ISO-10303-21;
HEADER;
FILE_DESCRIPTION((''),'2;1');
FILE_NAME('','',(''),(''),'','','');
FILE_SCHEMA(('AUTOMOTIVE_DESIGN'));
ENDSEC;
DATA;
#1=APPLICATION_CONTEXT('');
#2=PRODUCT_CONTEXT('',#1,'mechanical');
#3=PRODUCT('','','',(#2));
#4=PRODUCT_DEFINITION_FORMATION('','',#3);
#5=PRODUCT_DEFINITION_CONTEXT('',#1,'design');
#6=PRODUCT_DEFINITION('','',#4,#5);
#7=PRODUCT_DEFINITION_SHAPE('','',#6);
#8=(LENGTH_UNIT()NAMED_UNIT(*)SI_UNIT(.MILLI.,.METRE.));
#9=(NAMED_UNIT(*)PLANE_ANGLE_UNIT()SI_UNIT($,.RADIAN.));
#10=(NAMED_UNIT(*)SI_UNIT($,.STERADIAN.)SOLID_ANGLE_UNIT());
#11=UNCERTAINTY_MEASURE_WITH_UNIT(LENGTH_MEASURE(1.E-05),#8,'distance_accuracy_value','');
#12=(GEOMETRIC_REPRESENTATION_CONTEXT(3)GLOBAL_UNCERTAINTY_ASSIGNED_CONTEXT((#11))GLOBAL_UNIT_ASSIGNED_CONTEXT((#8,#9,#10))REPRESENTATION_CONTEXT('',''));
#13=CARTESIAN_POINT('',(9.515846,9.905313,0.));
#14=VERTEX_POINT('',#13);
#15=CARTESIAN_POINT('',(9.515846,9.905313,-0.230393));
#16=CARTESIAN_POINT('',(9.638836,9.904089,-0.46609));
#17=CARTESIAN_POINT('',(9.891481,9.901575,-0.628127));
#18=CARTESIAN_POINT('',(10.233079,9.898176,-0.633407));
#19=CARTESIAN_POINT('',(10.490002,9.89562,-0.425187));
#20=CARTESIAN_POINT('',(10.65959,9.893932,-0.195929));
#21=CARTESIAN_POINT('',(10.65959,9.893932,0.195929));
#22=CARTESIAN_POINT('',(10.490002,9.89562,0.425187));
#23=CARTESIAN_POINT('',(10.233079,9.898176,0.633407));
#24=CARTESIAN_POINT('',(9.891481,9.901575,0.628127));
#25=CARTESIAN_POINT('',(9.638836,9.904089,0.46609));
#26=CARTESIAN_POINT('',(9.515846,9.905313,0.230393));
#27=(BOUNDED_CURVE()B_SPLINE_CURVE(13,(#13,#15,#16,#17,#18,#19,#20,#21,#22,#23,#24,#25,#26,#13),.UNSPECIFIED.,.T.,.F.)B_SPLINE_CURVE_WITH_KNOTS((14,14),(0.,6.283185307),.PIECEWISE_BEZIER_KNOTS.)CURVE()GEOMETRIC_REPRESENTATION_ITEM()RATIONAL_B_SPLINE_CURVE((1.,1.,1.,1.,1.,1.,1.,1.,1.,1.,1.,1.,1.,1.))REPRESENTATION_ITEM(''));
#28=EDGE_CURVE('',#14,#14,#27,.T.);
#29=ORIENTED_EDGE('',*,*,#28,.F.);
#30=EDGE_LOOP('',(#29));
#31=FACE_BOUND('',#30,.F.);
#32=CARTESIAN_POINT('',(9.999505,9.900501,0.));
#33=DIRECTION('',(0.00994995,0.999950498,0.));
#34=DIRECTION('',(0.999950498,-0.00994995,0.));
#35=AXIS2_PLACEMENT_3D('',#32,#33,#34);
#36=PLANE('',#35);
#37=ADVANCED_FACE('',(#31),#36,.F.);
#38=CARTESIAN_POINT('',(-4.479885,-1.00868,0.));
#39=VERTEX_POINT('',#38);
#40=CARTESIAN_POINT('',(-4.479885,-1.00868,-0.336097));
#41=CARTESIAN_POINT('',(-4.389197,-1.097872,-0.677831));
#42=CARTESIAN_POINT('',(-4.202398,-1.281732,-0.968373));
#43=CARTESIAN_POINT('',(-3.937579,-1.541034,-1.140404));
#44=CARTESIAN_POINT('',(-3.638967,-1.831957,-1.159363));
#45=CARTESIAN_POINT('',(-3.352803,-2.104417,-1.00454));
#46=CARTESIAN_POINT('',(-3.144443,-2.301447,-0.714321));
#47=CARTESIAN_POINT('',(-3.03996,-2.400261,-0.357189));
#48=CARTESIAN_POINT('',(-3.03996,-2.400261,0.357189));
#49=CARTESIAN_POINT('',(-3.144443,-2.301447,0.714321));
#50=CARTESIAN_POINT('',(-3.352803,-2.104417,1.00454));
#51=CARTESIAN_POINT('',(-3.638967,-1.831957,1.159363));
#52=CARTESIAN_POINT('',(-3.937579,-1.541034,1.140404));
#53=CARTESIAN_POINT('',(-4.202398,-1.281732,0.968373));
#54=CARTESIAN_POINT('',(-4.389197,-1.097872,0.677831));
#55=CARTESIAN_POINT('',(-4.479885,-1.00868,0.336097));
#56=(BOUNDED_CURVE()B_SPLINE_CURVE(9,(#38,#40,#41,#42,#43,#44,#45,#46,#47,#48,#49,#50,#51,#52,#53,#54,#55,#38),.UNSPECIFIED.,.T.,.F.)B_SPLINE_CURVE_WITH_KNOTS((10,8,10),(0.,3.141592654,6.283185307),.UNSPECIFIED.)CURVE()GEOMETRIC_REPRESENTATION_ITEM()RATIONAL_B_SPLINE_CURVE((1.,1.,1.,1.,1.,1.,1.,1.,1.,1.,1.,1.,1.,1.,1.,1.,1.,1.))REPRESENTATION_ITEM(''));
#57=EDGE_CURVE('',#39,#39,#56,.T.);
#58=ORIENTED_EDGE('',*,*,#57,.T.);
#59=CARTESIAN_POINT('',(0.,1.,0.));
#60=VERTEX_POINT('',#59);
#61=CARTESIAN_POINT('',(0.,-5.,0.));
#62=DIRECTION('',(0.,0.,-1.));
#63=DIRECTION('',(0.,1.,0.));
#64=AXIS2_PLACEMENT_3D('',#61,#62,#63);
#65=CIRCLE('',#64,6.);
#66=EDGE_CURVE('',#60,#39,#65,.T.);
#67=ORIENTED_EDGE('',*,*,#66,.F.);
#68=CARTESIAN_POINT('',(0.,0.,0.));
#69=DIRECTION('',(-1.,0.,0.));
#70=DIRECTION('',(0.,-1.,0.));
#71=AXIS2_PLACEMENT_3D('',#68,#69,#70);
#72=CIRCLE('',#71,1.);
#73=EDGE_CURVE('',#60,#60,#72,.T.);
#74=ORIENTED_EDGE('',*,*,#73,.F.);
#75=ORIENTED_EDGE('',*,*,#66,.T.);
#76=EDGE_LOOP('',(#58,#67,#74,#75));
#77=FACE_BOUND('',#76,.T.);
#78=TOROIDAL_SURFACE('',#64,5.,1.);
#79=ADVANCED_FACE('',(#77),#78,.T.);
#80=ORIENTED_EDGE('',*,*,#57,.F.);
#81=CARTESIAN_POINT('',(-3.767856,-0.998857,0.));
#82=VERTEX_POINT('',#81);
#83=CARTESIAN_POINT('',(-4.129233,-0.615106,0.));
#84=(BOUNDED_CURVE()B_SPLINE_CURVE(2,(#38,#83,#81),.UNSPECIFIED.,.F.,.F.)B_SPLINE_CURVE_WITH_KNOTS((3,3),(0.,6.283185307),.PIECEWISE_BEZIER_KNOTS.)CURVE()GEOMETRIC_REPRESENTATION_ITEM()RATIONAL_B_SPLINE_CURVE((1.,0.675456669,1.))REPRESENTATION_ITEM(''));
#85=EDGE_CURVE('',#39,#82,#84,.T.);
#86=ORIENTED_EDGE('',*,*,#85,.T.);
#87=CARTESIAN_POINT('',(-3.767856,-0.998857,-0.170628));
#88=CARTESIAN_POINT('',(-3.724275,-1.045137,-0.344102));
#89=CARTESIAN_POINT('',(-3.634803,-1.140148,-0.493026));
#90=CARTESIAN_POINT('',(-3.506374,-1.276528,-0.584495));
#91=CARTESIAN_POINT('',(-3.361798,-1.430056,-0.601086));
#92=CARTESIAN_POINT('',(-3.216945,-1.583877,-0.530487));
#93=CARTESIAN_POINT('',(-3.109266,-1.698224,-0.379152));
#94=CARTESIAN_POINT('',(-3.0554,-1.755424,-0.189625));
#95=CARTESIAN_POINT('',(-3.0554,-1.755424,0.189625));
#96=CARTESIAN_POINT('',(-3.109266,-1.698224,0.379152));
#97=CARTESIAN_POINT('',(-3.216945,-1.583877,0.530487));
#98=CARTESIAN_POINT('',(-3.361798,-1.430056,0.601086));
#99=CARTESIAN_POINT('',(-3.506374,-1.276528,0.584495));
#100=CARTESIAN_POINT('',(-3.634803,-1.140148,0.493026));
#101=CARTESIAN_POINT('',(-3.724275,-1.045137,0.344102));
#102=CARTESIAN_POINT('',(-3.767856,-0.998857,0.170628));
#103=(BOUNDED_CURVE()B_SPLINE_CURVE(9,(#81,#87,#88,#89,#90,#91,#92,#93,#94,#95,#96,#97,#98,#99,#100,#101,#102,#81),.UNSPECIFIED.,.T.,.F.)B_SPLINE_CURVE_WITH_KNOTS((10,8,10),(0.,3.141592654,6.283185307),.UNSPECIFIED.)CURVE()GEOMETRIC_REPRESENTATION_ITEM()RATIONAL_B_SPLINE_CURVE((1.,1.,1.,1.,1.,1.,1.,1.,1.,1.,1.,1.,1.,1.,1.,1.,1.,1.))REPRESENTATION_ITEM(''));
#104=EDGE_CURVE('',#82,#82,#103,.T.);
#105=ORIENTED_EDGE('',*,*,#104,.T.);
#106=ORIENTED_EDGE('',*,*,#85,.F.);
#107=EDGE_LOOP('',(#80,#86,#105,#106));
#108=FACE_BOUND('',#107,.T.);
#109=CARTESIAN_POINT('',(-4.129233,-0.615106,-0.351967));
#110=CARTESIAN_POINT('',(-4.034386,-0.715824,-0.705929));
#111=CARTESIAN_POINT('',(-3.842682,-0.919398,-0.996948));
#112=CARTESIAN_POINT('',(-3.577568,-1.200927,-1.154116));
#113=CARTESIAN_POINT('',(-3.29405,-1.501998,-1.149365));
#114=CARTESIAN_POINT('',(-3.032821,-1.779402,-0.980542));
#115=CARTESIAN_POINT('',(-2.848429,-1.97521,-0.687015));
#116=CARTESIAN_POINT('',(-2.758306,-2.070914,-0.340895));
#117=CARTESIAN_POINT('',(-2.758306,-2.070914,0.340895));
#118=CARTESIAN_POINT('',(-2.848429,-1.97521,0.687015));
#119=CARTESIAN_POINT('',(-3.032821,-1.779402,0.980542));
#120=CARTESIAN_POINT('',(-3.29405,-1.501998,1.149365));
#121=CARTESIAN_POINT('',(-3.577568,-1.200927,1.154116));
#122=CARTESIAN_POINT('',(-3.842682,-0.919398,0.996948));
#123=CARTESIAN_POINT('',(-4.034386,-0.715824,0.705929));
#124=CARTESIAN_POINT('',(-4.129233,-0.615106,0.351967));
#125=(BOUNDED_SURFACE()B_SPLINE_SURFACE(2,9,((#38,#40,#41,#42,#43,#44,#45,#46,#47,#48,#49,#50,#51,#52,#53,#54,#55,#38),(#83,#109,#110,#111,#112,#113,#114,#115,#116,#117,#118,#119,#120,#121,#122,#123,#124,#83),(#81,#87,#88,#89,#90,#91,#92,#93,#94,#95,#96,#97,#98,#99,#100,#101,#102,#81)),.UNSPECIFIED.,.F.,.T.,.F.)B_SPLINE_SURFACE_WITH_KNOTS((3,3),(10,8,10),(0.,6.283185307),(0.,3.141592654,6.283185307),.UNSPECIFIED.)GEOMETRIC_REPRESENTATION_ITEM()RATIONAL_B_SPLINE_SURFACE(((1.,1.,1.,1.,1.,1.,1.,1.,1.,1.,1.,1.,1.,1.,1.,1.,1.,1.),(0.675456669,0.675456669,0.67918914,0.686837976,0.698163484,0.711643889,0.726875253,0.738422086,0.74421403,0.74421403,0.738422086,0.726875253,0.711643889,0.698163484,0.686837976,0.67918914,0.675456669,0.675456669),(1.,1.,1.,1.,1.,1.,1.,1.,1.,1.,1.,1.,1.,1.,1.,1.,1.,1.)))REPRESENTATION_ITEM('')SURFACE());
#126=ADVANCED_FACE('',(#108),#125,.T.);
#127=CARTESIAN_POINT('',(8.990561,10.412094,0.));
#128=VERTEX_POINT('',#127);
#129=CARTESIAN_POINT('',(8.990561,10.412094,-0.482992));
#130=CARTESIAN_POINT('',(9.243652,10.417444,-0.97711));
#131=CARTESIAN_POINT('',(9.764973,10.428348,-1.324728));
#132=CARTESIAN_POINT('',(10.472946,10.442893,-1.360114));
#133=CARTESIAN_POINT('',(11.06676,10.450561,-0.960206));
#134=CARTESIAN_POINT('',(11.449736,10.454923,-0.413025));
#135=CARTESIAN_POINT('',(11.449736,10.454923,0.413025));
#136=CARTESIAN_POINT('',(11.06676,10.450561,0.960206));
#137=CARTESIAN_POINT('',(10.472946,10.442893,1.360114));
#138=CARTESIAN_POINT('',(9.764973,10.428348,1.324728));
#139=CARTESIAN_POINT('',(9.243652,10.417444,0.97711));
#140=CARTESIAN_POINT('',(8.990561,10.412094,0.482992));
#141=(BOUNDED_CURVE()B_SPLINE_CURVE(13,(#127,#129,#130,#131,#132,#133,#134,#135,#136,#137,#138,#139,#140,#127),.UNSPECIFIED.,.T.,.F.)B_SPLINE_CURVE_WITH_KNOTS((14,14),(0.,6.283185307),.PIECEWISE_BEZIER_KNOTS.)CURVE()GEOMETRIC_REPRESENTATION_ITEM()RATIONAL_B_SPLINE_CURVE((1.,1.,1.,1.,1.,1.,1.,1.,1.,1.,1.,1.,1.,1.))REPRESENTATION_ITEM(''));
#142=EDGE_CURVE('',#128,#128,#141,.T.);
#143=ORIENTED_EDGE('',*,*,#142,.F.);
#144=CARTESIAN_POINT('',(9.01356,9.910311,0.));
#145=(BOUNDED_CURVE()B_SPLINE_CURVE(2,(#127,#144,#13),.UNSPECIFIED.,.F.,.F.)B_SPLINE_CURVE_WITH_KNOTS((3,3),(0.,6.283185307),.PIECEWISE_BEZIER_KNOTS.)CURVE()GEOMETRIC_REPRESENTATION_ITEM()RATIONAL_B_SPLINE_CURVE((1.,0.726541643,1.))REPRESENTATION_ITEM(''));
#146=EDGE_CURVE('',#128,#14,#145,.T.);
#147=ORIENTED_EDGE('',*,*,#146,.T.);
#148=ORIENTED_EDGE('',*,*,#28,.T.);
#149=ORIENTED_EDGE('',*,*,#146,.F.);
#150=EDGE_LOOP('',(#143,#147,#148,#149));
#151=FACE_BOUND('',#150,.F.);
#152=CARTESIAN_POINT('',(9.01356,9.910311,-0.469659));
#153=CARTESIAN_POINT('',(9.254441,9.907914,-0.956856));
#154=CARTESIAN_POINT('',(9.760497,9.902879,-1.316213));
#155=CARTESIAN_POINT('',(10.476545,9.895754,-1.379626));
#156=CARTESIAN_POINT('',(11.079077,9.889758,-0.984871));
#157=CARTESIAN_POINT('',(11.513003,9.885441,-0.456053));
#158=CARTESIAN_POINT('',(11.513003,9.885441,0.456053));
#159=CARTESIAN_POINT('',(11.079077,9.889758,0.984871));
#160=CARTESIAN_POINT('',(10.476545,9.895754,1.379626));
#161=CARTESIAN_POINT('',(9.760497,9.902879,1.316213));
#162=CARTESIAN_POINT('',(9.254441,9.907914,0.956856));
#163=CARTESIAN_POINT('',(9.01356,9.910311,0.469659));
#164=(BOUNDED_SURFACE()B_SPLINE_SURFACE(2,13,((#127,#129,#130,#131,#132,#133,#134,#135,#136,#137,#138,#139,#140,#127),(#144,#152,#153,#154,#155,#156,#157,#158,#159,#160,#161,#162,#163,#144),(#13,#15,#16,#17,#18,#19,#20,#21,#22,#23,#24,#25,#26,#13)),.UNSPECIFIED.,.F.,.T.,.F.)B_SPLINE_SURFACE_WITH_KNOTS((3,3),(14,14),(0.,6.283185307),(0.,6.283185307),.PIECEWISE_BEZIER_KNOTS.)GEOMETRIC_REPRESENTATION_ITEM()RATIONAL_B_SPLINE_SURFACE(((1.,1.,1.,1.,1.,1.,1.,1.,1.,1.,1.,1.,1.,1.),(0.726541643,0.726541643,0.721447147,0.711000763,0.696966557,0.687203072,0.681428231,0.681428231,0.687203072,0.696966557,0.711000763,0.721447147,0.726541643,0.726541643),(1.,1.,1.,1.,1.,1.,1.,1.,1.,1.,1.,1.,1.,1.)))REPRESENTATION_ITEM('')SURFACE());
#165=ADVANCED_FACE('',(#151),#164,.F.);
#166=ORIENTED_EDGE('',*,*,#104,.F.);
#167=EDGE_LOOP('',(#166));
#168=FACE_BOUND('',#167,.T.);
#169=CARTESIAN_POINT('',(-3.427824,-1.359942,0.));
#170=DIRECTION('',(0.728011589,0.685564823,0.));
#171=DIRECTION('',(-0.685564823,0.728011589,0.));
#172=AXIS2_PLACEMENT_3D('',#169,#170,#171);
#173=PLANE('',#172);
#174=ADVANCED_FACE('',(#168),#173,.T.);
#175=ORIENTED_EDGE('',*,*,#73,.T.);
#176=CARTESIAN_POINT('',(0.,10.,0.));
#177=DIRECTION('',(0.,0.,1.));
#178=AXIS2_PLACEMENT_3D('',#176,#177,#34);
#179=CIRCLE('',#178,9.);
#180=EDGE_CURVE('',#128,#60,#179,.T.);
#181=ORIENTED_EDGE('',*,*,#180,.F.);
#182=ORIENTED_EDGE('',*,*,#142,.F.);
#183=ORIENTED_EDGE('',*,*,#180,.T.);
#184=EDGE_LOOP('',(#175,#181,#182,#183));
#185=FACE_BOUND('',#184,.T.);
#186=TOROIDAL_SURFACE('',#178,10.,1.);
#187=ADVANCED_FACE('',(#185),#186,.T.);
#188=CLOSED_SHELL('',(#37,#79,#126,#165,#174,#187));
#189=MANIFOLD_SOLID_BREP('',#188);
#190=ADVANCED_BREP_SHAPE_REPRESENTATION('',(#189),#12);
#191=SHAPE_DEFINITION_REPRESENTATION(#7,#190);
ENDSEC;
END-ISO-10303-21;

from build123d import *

# Parameters (mm, degrees)
F1_R = 1
F3_R = 0.4828427125
F4_R = 0.5311269837


with BuildPart() as f2:
    # F2: sweep along a path in F0
    with BuildLine(Plane.XY) as f2_path:
        ThreePointArc((9.9995049802, 9.9005005005), (-7.0358014826, 17.1061591241), (0, 0))
        ThreePointArc((0, 0), (1.8438696101, -9.6475956), (-3.4278241147, -1.3599420556))
    # F1 (on Right) → F2 (sweep)
    with BuildSketch(Plane.YZ):
        Circle(F1_R)
    sweep(path=f2_path.line)

    # F3
    f3_edges = [f2.edges().sort_by_distance(p)[0] for p in [
        (-2.742259, -2.087954, 0),
    ]]
    fillet(f3_edges, radius=F3_R)

    # F4
    f4_edges = [f2.edges().sort_by_distance(p)[0] for p in [
        (10.999455, 9.890551, 0),
    ]]
    fillet(f4_edges, radius=F4_R)


solid = f2.part
